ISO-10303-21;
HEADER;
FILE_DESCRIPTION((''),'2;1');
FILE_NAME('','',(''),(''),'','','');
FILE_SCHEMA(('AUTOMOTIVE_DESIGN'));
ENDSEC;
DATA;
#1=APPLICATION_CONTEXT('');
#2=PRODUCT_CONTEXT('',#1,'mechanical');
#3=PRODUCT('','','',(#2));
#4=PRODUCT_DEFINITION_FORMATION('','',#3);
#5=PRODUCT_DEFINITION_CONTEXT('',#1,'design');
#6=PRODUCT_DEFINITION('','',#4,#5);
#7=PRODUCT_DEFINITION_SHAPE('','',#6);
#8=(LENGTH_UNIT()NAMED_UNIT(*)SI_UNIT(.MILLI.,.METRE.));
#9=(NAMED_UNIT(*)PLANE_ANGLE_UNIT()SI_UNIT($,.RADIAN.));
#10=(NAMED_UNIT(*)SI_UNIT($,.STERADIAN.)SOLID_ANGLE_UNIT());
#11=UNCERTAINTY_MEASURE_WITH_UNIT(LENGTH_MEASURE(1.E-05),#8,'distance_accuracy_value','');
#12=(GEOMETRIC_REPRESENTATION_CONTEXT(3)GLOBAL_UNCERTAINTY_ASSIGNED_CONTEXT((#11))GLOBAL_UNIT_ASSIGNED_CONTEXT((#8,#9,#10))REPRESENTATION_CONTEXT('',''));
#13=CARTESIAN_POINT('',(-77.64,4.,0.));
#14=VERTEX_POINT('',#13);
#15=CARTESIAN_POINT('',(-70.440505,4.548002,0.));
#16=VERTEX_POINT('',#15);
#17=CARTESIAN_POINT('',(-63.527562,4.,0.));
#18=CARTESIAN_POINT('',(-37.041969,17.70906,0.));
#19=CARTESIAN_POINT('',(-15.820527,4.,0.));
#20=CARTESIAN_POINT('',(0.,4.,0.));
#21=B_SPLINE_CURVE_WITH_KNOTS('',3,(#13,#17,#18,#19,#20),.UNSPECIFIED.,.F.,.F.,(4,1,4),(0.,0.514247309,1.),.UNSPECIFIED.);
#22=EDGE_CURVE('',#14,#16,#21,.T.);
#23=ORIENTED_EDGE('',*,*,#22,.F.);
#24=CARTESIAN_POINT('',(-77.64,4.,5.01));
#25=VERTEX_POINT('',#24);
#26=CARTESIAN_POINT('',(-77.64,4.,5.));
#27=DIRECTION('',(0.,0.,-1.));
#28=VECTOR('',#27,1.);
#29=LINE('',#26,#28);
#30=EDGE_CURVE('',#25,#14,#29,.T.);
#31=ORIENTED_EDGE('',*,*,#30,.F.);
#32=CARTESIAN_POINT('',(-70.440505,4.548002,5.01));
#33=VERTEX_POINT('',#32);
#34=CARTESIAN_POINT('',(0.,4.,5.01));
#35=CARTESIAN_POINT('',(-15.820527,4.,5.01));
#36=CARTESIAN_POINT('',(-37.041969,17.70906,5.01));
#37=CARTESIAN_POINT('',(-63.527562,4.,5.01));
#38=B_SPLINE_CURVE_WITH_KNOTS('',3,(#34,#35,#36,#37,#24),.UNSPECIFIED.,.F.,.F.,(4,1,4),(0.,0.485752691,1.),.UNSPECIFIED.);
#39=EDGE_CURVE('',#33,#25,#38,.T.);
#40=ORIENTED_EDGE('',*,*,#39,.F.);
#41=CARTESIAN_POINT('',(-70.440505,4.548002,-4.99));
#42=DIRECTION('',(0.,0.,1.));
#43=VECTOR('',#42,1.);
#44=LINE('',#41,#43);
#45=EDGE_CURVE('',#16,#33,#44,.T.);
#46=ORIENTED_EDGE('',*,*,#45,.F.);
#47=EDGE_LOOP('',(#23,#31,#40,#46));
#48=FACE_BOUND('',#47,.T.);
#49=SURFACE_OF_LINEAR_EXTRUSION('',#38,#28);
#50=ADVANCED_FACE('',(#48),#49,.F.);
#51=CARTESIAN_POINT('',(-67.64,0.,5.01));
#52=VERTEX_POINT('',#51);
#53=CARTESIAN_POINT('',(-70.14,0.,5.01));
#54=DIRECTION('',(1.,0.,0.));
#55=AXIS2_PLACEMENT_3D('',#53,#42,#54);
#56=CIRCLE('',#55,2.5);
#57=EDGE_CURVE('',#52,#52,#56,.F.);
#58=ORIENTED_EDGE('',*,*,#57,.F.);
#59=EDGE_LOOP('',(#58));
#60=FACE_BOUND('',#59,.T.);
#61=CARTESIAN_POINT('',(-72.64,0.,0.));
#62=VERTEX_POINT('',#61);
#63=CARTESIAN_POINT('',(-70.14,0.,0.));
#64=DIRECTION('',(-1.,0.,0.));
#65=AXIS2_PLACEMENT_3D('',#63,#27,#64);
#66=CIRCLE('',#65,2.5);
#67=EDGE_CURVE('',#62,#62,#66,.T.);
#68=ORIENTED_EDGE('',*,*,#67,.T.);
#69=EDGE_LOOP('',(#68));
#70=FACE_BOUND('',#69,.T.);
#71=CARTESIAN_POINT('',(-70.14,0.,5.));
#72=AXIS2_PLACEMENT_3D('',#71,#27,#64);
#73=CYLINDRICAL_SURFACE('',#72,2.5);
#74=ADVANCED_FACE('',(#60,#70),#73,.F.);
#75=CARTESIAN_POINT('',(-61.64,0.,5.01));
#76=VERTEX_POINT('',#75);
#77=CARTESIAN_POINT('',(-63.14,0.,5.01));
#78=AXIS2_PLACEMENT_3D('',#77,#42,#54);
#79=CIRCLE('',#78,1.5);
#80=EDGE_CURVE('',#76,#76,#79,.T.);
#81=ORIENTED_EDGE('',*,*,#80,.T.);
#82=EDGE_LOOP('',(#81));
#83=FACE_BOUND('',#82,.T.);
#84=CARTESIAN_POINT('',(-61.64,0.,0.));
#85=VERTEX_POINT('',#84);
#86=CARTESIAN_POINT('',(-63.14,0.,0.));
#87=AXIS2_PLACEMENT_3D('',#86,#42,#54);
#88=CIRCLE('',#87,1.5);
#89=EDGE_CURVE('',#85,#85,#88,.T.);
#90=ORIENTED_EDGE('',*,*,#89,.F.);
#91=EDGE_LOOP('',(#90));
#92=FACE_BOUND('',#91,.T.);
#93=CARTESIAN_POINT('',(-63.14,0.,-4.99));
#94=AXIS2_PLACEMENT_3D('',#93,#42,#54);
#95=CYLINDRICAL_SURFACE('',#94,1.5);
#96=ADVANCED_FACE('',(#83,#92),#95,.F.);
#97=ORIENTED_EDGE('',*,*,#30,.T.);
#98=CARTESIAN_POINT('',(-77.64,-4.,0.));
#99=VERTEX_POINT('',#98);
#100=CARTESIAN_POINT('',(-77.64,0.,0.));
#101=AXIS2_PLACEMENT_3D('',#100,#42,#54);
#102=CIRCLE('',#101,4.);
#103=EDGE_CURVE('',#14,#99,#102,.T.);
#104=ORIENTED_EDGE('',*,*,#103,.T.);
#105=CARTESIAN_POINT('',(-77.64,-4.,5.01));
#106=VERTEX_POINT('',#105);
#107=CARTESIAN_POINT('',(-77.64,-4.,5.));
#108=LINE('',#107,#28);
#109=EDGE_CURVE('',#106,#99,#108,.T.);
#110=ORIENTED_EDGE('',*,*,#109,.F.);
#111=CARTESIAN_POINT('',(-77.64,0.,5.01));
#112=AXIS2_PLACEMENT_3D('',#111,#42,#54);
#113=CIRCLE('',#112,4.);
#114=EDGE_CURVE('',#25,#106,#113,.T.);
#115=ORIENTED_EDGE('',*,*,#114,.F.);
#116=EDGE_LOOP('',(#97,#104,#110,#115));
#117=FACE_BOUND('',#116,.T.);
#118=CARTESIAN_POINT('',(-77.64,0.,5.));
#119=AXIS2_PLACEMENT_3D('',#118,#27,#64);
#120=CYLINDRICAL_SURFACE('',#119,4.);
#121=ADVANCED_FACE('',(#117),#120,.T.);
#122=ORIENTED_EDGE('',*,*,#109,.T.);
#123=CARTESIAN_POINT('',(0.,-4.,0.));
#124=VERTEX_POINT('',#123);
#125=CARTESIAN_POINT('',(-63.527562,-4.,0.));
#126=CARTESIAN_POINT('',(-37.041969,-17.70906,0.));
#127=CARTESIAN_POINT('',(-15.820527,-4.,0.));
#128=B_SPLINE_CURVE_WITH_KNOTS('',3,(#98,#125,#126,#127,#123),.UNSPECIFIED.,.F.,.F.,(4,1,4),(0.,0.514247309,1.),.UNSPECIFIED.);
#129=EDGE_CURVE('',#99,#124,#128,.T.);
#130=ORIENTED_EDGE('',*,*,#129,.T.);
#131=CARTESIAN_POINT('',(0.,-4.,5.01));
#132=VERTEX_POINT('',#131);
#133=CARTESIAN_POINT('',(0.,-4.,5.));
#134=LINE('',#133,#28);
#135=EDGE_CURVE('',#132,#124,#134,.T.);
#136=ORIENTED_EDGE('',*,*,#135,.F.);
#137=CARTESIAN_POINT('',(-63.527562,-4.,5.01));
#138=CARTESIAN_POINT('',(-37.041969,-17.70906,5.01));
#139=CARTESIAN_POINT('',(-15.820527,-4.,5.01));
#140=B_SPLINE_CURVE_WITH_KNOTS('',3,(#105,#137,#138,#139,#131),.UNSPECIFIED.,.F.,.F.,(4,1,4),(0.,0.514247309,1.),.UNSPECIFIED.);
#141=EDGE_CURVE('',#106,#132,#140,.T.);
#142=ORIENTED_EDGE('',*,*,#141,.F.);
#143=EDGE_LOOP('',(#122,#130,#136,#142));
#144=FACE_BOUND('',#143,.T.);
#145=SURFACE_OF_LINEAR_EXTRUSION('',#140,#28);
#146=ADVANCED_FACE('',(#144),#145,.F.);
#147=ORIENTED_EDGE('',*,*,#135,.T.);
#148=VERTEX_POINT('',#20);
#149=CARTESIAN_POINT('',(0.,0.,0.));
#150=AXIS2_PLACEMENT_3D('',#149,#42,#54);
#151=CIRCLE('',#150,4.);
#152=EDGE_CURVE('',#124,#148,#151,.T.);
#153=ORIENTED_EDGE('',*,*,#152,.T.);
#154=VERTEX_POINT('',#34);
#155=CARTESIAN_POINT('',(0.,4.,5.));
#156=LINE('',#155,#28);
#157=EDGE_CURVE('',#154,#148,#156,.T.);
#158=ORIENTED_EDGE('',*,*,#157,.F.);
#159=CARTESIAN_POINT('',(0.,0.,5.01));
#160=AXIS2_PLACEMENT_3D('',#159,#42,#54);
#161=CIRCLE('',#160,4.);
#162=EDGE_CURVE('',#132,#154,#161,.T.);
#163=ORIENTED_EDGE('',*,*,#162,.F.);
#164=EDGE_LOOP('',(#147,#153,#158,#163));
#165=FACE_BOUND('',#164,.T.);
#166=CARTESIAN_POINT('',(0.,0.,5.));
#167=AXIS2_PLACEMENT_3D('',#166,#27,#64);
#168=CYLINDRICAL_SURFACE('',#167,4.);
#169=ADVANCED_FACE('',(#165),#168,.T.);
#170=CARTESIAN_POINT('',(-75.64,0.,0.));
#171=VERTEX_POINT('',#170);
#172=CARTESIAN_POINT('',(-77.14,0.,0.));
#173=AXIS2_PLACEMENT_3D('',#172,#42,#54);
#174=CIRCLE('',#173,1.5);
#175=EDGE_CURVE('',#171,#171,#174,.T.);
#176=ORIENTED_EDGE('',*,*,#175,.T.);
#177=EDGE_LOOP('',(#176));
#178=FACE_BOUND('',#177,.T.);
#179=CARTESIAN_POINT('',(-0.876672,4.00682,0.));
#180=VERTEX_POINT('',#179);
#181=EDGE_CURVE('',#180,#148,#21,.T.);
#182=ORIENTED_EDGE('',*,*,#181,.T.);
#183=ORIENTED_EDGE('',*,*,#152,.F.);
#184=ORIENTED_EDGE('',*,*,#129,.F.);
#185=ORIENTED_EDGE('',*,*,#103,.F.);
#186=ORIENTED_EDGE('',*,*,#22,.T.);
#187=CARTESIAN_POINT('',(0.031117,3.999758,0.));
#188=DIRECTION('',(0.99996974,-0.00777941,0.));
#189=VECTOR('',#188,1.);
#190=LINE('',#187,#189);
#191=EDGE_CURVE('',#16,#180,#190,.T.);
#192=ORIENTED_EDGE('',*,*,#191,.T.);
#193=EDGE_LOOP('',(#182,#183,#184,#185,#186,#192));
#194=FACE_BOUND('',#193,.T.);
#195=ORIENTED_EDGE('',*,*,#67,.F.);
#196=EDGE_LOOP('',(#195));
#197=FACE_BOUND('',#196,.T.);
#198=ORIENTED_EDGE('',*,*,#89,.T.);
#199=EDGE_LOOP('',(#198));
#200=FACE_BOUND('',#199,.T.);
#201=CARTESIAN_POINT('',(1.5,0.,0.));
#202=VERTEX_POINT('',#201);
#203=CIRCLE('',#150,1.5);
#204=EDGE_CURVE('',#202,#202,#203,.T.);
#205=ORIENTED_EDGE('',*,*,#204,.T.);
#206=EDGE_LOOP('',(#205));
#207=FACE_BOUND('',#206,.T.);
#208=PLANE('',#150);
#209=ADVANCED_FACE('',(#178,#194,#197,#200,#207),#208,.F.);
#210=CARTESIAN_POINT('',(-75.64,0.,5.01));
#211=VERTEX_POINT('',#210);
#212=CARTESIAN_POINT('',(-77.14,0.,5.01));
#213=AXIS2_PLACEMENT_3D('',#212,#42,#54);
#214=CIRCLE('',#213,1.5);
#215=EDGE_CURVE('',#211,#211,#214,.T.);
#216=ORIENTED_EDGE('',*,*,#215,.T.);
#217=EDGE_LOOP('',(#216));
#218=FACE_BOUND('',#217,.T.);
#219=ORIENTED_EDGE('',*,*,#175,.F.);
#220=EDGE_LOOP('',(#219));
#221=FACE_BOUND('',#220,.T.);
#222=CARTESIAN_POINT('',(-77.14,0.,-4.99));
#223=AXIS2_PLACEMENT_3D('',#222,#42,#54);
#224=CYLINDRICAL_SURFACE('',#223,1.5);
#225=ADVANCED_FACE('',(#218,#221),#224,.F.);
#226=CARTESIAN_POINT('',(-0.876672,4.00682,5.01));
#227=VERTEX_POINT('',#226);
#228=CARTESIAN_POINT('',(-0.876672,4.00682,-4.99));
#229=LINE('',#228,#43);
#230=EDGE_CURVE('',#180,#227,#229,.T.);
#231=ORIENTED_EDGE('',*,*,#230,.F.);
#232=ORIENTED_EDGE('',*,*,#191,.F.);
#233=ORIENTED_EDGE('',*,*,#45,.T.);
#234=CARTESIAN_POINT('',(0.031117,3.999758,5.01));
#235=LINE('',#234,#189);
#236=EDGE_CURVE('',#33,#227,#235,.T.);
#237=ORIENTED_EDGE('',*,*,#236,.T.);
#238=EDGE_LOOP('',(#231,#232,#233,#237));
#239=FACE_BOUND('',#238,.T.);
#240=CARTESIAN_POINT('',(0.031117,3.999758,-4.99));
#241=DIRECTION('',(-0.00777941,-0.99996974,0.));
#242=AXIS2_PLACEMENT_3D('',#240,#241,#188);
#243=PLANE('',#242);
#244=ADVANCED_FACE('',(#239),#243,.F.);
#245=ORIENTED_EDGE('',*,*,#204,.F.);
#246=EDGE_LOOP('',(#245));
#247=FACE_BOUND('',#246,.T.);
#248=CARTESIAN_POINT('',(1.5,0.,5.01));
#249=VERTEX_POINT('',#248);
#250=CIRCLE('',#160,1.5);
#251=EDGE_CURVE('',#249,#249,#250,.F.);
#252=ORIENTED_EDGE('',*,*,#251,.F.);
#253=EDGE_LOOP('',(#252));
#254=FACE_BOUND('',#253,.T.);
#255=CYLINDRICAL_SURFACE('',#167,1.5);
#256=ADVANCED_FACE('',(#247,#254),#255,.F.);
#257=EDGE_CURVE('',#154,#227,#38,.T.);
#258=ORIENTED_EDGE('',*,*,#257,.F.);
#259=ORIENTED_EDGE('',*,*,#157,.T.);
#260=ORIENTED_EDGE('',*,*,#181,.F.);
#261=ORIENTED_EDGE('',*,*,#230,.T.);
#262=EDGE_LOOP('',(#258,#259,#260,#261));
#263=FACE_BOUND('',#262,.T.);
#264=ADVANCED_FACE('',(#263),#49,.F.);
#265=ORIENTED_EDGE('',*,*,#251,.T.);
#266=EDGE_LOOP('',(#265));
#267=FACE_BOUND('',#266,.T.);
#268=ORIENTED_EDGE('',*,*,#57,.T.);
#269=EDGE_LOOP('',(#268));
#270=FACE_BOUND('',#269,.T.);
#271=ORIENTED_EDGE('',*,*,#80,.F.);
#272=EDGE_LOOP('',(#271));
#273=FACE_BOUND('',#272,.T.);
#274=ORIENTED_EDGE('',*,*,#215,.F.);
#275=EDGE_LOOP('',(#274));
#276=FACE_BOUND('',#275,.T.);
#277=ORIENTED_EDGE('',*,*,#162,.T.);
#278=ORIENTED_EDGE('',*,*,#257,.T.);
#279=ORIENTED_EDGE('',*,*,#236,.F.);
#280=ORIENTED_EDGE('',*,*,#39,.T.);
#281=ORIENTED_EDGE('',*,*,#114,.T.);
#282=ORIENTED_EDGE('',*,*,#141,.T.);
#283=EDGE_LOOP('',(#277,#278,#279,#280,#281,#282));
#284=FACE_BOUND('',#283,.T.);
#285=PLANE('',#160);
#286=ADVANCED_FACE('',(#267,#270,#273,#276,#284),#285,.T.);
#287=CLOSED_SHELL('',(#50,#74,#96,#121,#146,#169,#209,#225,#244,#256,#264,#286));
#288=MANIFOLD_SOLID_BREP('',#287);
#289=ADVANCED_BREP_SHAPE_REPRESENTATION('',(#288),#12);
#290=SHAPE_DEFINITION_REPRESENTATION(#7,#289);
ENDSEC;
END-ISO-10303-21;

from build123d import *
from build123d.topology import SkipClean

# Parameters (mm, degrees)
SKETCH1_R             = 1.5
BOSS_EXTRUDE1_DEPTH   = 5
BOSS_EXTRUDE3_DEPTH   = 5
SKETCH4_R             = 2.5
CUT_EXTRUDE2_DEPTH    = 5
BOSS_EXTRUDE4_DEPTH   = 5
BOSS_EXTRUDE4_2_DEPTH = 5
SKETCH7_R             = 1.5
SKETCH7_R_2           = 2.5
BOSS_EXTRUDE5_DEPTH   = 0.01
CUT_EXTRUDE3_DEPTH    = 10
SKETCH10_R            = 1.5
CUT_EXTRUDE4_DEPTH    = 10


with BuildPart() as part:
    # Sketch1 → Boss-Extrude1 (new body)
    with BuildSketch(Plane.XY):
        with BuildLine():
            Line((0, -4), (-70.14, -4))
            ThreePointArc((-70.14, -4), (-74.14, 0), (-70.14, 4))
            Line((-70.14, 4), (0, 4))
            ThreePointArc((0, 4), (4, 0), (0, -4))
        make_face()
        with Locations((-70.14, 0)):
            Circle(SKETCH1_R, mode=Mode.SUBTRACT)
        Circle(SKETCH1_R, mode=Mode.SUBTRACT)
    extrude(amount=BOSS_EXTRUDE1_DEPTH)

    # Sketch3 → Boss-Extrude3 (add)
    with BuildSketch(Plane.XY):
        with BuildLine():
            Line((-70.14, -4), (-77.64, -4))
            ThreePointArc((-77.64, -4), (-81.64, 0), (-77.64, 4))
            Line((-77.64, 4), (-70.14, 4))
            ThreePointArc((-70.14, 4), (-66.14, 0), (-70.14, -4))
        make_face()
    extrude(amount=BOSS_EXTRUDE3_DEPTH)

    # Sketch4 → Cut-Extrude2 (cut)
    with BuildSketch(Plane(origin=(0, 0, 0), x_dir=(-1, 0, 0), z_dir=(0, 0, -1))):
        with Locations((70.14, 0)):
            Circle(SKETCH4_R)
    extrude(amount=-CUT_EXTRUDE2_DEPTH, mode=Mode.SUBTRACT)



with BuildPart() as body_2:
    # Sketch5 → Boss-Extrude4 (new body)
    with BuildSketch(Plane.XY.offset(5)):
        with BuildLine():
            Line((0, -4), (-77.64, -4))
            add(Edge.make_bspline(
                [(-77.64, -4), (-63.527561679, -4), (-37.041969255, -17.709059975), (-15.820527041, -4), (0, -4)],
                knots=[0, 0, 0, 0, 0.514247309, 1, 1, 1, 1], degree=3))
        make_face()
    extrude(amount=-BOSS_EXTRUDE4_DEPTH)


with BuildPart() as body_3:
    # Sketch5 → Boss-Extrude4 2 (new body)
    with BuildSketch(Plane.XY.offset(5)):
        with BuildLine():
            add(Edge.make_bspline(
                [(-77.64, 4), (-63.527561679, 4), (-37.041969255, 17.709059975), (-15.820527041, 4), (0, 4)],
                knots=[0, 0, 0, 0, 0.514247309, 1, 1, 1, 1], degree=3))
            Line((-77.64, 4), (0, 4))
        make_face()
    extrude(amount=-BOSS_EXTRUDE4_2_DEPTH)


with BuildPart() as part_1:
    with SkipClean():  # the faces are left unmerged after this step: merging them gives an invalid solid
        add(part.part)

        add(body_2.part)  # Boss-Extrude5 merges body 2

        add(body_3.part)  # Boss-Extrude5 merges body 3
        # Sketch7 → Boss-Extrude5 (add)
        with BuildSketch(Plane.XY.offset(5)):
            with BuildLine():
                add(Edge.make_bspline(
                    [(0, 4), (-15.820527041, 4), (-37.041969255, 17.709059975), (-63.527561679, 4), (-77.64, 4)],
                    knots=[0, 0, 0, 0, 0.485752691, 1, 1, 1, 1], degree=3))
                ThreePointArc((-77.64, 4), (-81.64, 0), (-77.64, -4))
                add(Edge.make_bspline(
                    [(-77.64, -4), (-63.527561679, -4), (-37.041969255, -17.709059975), (-15.820527041, -4), (0, -4)],
                    knots=[0, 0, 0, 0, 0.514247309, 1, 1, 1, 1], degree=3))
                ThreePointArc((0, -4), (4, 0), (0, 4))
            make_face()
            Circle(SKETCH7_R, mode=Mode.SUBTRACT)
            with Locations((-70.14, 0)):
                Circle(SKETCH7_R_2, mode=Mode.SUBTRACT)
        extrude(amount=BOSS_EXTRUDE5_DEPTH)
    add(part_1.part.scale(1), mode=Mode.REPLACE)  # the faces are merged on a copy

    # Sketch9 → Cut-Extrude3 (cut)
    with BuildSketch(Plane.XY.offset(5.01)):
        with BuildLine():
            add(Edge.make_bspline(
                [(-0.876672038, 4.006820197), (-16.204235996, 4.245362878), (-35.408867191, 16.400266247), (-58.905371653, 6.201116002), (-70.440504523, 4.548002129)],
                knots=[0.009030481, 0.009030481, 0.009030481, 0.009030481, 0.485752691, 0.911971345, 0.911971345, 0.911971345, 0.911971345], degree=3))
            Line((-70.440504523, 4.548002129), (-70.104638549, 4.545389211))
            Line((-70.104638549, 4.545389211), (-0.876672038, 4.006820197))
        make_face()
    extrude(amount=-CUT_EXTRUDE3_DEPTH, mode=Mode.SUBTRACT)

    # Sketch10 → Cut-Extrude4 (cut)
    with BuildSketch(Plane.XY.offset(5.01)):
        with Locations((-63.14, 0)):
            Circle(SKETCH10_R)
        with Locations((-77.14, 0)):
            Circle(SKETCH10_R)
    extrude(amount=-CUT_EXTRUDE4_DEPTH, mode=Mode.SUBTRACT)


solid = part_1.part
